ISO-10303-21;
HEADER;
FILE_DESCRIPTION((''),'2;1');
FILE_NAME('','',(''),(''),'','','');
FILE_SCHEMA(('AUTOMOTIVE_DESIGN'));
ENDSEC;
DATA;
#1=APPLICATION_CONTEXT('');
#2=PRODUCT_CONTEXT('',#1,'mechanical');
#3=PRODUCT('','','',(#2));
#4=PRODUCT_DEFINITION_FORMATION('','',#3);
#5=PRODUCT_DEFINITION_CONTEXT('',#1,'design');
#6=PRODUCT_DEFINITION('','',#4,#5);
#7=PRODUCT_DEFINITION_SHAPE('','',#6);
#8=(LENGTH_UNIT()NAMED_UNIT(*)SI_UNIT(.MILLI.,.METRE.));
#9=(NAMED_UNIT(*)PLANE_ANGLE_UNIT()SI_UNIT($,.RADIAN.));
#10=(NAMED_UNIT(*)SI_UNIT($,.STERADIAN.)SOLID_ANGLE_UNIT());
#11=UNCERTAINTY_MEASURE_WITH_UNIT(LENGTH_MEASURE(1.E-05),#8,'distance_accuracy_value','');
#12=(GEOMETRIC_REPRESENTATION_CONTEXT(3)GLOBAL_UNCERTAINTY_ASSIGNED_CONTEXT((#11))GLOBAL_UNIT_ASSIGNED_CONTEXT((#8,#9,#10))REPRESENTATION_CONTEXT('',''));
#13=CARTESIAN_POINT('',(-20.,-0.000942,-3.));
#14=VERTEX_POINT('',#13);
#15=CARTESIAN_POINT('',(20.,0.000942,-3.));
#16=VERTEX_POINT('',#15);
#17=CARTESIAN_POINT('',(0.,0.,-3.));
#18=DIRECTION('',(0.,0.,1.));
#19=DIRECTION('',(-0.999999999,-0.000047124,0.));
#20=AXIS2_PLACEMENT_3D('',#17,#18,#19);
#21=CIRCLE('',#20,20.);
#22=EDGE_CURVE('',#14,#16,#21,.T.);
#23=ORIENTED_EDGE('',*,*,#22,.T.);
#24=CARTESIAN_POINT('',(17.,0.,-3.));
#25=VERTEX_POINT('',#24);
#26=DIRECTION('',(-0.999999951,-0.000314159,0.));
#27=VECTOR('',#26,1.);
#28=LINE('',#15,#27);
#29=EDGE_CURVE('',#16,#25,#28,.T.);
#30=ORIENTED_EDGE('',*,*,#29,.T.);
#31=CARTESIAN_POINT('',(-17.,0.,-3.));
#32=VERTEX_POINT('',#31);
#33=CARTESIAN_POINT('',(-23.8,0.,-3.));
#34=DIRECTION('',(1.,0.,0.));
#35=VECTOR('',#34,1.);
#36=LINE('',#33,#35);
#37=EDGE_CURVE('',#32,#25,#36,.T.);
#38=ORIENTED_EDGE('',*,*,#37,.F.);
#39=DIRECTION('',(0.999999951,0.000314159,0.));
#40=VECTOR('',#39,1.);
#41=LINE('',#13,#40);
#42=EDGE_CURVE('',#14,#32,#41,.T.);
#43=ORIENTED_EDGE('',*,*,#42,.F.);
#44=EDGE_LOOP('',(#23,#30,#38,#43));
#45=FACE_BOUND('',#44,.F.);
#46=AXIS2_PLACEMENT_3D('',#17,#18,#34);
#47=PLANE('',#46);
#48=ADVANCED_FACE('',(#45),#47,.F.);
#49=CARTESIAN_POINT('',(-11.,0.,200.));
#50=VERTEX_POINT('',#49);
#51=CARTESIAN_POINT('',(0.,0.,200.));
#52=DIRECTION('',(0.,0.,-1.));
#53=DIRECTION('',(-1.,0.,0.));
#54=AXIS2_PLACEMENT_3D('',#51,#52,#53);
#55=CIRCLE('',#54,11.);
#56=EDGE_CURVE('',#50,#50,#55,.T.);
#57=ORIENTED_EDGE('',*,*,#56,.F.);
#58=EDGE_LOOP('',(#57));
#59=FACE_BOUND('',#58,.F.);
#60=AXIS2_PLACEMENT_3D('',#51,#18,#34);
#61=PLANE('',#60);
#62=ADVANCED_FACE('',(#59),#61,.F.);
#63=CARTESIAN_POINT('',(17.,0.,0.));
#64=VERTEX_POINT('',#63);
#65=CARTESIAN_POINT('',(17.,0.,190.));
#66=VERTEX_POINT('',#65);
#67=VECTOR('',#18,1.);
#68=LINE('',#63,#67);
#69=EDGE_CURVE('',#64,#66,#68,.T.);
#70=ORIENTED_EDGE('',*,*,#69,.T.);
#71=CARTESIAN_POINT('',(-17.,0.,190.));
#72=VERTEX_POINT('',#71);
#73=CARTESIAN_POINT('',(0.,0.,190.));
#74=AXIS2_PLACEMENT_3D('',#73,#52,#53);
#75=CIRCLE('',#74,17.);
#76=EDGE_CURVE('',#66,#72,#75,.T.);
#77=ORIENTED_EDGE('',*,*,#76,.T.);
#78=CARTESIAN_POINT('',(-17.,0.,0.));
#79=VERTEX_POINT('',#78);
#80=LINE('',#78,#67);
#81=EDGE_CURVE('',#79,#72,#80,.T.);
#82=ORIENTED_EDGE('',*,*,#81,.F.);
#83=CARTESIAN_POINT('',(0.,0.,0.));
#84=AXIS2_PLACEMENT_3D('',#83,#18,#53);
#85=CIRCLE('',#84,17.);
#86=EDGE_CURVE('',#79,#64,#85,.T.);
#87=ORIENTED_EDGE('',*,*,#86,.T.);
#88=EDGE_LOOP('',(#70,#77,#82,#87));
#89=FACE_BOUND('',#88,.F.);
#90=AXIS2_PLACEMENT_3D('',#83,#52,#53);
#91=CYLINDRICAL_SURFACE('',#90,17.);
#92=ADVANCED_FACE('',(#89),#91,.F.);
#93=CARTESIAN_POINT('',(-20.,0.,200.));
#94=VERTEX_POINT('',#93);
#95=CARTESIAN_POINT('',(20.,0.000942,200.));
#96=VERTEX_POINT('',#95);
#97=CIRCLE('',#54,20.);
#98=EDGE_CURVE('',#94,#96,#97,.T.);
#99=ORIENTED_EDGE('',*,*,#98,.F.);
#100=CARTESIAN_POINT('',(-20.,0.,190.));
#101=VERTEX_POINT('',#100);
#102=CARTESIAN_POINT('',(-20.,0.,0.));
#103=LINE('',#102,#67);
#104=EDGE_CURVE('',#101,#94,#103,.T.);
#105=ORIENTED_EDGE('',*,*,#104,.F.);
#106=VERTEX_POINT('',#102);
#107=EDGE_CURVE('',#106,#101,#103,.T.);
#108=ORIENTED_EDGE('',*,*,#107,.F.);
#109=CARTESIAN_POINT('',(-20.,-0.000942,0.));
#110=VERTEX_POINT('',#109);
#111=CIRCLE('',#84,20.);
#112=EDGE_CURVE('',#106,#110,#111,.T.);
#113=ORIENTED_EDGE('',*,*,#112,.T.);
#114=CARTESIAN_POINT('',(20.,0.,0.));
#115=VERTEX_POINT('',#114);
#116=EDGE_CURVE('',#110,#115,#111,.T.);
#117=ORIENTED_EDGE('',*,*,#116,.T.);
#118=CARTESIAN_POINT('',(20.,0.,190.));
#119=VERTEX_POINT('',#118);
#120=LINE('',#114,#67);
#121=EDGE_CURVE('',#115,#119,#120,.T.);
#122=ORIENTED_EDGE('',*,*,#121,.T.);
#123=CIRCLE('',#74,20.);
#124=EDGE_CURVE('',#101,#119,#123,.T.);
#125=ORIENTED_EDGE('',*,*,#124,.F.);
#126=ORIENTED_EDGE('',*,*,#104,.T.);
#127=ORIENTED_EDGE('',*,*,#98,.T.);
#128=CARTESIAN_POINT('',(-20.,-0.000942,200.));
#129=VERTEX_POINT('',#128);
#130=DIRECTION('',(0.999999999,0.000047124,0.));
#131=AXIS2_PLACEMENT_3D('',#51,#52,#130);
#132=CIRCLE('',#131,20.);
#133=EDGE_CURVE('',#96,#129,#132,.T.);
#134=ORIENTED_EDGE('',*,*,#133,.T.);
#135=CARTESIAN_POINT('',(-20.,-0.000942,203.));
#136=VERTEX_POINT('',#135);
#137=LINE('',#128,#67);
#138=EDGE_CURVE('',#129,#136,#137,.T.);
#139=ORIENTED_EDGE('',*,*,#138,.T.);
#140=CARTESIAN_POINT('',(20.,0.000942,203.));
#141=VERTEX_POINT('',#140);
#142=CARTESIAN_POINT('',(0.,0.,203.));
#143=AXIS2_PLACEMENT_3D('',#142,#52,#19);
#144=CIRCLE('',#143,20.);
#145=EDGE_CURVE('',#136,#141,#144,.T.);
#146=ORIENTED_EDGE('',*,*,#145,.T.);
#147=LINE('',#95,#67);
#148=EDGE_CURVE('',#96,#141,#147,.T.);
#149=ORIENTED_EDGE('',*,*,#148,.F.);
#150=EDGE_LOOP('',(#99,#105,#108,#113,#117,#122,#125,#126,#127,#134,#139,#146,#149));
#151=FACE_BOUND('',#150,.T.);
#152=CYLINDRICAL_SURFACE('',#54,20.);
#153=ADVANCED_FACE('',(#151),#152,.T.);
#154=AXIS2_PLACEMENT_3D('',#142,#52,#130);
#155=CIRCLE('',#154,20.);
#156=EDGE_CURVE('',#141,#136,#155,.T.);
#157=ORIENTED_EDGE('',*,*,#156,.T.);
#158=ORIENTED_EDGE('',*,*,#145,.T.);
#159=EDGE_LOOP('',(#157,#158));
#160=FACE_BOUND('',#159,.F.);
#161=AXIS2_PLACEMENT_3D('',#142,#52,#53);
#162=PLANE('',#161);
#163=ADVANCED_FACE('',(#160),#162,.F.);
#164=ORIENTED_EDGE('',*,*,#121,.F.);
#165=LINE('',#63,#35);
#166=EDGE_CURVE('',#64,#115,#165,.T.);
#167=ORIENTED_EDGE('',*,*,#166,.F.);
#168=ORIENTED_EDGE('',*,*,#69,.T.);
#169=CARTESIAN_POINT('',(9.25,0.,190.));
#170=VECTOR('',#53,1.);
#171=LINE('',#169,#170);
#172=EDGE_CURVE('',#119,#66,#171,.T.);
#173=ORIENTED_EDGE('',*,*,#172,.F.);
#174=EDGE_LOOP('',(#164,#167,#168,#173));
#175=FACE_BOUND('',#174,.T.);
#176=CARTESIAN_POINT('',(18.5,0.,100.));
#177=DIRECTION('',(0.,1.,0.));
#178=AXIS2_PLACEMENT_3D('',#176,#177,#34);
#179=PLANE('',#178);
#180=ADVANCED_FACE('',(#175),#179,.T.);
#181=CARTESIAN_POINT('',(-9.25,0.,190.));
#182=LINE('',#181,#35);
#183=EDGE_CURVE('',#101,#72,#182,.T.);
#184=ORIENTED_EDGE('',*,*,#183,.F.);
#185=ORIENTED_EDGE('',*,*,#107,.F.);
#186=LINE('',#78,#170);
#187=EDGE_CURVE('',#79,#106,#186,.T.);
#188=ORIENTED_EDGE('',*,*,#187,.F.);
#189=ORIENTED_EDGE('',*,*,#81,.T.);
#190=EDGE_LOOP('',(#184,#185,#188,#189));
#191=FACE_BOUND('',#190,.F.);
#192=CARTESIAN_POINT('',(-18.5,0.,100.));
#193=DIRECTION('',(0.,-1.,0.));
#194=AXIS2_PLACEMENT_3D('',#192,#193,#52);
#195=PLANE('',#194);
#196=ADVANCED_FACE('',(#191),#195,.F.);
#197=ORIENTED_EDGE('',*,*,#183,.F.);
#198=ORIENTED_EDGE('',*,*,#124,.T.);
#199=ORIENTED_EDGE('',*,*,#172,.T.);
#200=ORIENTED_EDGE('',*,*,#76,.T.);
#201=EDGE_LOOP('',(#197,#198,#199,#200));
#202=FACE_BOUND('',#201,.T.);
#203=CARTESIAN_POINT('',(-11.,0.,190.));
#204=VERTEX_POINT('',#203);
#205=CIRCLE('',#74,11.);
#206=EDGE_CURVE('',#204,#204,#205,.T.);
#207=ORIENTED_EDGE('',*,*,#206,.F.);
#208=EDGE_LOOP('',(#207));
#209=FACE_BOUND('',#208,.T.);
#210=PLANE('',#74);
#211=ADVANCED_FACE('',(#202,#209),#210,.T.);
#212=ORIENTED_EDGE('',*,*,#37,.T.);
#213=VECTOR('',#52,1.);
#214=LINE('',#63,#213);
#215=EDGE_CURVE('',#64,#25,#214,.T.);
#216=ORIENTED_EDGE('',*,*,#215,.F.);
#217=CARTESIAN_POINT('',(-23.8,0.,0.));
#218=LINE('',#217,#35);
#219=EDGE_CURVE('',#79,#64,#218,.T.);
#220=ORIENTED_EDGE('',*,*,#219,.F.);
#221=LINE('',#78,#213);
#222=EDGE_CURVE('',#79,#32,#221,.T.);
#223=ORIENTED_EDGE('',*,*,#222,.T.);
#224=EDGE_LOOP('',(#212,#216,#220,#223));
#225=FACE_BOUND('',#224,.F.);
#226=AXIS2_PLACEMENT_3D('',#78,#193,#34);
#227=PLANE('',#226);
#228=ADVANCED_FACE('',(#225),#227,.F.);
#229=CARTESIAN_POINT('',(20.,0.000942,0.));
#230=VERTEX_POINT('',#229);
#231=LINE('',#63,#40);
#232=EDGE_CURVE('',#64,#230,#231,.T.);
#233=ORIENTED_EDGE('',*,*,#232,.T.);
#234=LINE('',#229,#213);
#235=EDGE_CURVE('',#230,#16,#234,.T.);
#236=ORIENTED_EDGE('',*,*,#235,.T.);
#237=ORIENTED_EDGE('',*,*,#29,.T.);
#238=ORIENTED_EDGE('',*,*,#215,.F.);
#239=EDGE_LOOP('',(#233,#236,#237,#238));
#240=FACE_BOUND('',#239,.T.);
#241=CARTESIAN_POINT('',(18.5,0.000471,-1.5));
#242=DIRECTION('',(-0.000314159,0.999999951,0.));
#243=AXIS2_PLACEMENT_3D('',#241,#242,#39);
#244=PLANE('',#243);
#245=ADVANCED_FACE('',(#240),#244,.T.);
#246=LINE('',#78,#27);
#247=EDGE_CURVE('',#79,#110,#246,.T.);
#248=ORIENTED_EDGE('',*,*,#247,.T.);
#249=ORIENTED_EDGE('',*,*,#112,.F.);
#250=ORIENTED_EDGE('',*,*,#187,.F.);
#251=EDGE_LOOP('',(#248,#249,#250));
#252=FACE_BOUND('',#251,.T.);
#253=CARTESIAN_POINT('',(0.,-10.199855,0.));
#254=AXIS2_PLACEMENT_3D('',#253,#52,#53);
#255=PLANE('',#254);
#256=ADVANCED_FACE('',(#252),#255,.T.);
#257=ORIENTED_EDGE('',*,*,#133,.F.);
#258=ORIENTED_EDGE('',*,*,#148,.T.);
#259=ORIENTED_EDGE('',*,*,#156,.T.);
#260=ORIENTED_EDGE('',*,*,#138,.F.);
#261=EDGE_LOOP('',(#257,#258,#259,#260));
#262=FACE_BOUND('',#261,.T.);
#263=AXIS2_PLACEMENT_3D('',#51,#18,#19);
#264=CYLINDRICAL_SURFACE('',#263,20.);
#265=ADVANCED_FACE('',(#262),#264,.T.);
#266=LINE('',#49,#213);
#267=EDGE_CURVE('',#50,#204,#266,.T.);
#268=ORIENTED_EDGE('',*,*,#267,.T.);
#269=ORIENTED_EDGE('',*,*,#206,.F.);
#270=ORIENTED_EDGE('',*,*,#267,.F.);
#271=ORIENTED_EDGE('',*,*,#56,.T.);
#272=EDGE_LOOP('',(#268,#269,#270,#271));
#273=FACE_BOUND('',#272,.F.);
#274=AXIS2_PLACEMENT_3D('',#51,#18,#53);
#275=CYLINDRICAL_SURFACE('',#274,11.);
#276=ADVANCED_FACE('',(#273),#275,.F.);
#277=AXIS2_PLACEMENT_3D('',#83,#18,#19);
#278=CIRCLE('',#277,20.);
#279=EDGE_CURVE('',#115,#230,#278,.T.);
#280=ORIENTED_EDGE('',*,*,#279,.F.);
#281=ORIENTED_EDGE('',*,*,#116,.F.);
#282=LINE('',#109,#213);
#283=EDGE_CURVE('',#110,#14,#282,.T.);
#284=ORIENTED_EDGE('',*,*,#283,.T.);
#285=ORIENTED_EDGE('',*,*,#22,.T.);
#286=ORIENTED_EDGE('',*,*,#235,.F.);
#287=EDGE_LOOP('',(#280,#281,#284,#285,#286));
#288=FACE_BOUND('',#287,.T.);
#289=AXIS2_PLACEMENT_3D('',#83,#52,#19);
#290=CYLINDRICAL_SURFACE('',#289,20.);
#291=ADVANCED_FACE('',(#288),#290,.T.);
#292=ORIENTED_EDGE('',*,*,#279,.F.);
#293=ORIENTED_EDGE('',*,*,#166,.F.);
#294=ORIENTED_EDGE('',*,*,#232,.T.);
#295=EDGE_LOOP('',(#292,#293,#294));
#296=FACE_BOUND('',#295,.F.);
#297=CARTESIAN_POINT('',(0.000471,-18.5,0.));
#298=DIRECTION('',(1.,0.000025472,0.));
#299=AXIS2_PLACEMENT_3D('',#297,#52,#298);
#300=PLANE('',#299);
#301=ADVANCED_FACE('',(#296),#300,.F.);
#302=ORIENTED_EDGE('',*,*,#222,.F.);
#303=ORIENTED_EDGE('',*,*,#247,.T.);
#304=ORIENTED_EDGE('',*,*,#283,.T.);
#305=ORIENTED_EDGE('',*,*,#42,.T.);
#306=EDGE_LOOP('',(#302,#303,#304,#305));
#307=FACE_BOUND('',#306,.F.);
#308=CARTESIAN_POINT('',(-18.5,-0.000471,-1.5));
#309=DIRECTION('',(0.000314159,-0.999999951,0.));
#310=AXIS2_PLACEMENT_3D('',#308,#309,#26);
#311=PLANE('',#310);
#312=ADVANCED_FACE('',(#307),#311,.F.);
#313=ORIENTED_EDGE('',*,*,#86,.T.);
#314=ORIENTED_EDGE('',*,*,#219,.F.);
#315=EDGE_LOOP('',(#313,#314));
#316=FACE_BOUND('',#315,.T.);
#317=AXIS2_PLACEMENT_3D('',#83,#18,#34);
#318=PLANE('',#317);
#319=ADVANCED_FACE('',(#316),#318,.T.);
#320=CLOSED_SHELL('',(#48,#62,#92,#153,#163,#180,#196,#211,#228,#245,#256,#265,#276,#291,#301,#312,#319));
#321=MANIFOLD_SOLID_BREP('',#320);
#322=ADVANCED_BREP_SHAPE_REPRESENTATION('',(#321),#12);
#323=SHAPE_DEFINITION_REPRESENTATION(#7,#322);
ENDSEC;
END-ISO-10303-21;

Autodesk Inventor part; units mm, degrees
ref_plane "YZ Plane" through (0, 0, 0) normal (1, 0, 0) x (0, 1, 0)
ref_plane "XZ Plane" through (0, 0, 0) normal (0, 1, 0) x (-1, 0, 0)
ref_plane "XY Plane" through (0, 0, 0) normal (0, 0, 1) x (1, 0, 0)
sketch "Sketch1" plane through (0, 0, 0) normal (0, 0, 1) x (1, 0, 0)
  arc A0 (-17, 0) -> (17, 0) centre (0, 0) ccw
  line L0 (-23.8, 0) -> (23.8, 0) projected
  line L1 (-17, 0) -> (17, 0)
  dimension "d1" = 17
extrude "Extrusion1" add sketch "Sketch1" along normal blind 200
shell "Shell1" thickness 3 outward yes removed faces 1 at (5.6667, 0, 66.6667)
sketch "Sketch2" plane through (0, 0, 200) normal (0, 0, -1) x (-1, 0, 0)
  circle A0 centre (0, 0) radius 20
  arc A1 (-20, 0) -> (20, 0) centre (0, 0) ccw projected
extrude "Extrusion2" add sketch "Sketch2" against normal up to surface (3 mm away)
sketch "Sketch3" plane through (0, 0, 200) normal (0, 0, -1) x (-1, 0, 0)
  circle A0 centre (0, 0) radius 11
  circle A1 centre (0, 0) radius 20
  circle A2 centre (0, 0) radius 20 projected
  dimension "d7" = 22
extrude "Extrusion3" add sketch "Sketch3" along normal blind 10
properties part number "prototype3"
